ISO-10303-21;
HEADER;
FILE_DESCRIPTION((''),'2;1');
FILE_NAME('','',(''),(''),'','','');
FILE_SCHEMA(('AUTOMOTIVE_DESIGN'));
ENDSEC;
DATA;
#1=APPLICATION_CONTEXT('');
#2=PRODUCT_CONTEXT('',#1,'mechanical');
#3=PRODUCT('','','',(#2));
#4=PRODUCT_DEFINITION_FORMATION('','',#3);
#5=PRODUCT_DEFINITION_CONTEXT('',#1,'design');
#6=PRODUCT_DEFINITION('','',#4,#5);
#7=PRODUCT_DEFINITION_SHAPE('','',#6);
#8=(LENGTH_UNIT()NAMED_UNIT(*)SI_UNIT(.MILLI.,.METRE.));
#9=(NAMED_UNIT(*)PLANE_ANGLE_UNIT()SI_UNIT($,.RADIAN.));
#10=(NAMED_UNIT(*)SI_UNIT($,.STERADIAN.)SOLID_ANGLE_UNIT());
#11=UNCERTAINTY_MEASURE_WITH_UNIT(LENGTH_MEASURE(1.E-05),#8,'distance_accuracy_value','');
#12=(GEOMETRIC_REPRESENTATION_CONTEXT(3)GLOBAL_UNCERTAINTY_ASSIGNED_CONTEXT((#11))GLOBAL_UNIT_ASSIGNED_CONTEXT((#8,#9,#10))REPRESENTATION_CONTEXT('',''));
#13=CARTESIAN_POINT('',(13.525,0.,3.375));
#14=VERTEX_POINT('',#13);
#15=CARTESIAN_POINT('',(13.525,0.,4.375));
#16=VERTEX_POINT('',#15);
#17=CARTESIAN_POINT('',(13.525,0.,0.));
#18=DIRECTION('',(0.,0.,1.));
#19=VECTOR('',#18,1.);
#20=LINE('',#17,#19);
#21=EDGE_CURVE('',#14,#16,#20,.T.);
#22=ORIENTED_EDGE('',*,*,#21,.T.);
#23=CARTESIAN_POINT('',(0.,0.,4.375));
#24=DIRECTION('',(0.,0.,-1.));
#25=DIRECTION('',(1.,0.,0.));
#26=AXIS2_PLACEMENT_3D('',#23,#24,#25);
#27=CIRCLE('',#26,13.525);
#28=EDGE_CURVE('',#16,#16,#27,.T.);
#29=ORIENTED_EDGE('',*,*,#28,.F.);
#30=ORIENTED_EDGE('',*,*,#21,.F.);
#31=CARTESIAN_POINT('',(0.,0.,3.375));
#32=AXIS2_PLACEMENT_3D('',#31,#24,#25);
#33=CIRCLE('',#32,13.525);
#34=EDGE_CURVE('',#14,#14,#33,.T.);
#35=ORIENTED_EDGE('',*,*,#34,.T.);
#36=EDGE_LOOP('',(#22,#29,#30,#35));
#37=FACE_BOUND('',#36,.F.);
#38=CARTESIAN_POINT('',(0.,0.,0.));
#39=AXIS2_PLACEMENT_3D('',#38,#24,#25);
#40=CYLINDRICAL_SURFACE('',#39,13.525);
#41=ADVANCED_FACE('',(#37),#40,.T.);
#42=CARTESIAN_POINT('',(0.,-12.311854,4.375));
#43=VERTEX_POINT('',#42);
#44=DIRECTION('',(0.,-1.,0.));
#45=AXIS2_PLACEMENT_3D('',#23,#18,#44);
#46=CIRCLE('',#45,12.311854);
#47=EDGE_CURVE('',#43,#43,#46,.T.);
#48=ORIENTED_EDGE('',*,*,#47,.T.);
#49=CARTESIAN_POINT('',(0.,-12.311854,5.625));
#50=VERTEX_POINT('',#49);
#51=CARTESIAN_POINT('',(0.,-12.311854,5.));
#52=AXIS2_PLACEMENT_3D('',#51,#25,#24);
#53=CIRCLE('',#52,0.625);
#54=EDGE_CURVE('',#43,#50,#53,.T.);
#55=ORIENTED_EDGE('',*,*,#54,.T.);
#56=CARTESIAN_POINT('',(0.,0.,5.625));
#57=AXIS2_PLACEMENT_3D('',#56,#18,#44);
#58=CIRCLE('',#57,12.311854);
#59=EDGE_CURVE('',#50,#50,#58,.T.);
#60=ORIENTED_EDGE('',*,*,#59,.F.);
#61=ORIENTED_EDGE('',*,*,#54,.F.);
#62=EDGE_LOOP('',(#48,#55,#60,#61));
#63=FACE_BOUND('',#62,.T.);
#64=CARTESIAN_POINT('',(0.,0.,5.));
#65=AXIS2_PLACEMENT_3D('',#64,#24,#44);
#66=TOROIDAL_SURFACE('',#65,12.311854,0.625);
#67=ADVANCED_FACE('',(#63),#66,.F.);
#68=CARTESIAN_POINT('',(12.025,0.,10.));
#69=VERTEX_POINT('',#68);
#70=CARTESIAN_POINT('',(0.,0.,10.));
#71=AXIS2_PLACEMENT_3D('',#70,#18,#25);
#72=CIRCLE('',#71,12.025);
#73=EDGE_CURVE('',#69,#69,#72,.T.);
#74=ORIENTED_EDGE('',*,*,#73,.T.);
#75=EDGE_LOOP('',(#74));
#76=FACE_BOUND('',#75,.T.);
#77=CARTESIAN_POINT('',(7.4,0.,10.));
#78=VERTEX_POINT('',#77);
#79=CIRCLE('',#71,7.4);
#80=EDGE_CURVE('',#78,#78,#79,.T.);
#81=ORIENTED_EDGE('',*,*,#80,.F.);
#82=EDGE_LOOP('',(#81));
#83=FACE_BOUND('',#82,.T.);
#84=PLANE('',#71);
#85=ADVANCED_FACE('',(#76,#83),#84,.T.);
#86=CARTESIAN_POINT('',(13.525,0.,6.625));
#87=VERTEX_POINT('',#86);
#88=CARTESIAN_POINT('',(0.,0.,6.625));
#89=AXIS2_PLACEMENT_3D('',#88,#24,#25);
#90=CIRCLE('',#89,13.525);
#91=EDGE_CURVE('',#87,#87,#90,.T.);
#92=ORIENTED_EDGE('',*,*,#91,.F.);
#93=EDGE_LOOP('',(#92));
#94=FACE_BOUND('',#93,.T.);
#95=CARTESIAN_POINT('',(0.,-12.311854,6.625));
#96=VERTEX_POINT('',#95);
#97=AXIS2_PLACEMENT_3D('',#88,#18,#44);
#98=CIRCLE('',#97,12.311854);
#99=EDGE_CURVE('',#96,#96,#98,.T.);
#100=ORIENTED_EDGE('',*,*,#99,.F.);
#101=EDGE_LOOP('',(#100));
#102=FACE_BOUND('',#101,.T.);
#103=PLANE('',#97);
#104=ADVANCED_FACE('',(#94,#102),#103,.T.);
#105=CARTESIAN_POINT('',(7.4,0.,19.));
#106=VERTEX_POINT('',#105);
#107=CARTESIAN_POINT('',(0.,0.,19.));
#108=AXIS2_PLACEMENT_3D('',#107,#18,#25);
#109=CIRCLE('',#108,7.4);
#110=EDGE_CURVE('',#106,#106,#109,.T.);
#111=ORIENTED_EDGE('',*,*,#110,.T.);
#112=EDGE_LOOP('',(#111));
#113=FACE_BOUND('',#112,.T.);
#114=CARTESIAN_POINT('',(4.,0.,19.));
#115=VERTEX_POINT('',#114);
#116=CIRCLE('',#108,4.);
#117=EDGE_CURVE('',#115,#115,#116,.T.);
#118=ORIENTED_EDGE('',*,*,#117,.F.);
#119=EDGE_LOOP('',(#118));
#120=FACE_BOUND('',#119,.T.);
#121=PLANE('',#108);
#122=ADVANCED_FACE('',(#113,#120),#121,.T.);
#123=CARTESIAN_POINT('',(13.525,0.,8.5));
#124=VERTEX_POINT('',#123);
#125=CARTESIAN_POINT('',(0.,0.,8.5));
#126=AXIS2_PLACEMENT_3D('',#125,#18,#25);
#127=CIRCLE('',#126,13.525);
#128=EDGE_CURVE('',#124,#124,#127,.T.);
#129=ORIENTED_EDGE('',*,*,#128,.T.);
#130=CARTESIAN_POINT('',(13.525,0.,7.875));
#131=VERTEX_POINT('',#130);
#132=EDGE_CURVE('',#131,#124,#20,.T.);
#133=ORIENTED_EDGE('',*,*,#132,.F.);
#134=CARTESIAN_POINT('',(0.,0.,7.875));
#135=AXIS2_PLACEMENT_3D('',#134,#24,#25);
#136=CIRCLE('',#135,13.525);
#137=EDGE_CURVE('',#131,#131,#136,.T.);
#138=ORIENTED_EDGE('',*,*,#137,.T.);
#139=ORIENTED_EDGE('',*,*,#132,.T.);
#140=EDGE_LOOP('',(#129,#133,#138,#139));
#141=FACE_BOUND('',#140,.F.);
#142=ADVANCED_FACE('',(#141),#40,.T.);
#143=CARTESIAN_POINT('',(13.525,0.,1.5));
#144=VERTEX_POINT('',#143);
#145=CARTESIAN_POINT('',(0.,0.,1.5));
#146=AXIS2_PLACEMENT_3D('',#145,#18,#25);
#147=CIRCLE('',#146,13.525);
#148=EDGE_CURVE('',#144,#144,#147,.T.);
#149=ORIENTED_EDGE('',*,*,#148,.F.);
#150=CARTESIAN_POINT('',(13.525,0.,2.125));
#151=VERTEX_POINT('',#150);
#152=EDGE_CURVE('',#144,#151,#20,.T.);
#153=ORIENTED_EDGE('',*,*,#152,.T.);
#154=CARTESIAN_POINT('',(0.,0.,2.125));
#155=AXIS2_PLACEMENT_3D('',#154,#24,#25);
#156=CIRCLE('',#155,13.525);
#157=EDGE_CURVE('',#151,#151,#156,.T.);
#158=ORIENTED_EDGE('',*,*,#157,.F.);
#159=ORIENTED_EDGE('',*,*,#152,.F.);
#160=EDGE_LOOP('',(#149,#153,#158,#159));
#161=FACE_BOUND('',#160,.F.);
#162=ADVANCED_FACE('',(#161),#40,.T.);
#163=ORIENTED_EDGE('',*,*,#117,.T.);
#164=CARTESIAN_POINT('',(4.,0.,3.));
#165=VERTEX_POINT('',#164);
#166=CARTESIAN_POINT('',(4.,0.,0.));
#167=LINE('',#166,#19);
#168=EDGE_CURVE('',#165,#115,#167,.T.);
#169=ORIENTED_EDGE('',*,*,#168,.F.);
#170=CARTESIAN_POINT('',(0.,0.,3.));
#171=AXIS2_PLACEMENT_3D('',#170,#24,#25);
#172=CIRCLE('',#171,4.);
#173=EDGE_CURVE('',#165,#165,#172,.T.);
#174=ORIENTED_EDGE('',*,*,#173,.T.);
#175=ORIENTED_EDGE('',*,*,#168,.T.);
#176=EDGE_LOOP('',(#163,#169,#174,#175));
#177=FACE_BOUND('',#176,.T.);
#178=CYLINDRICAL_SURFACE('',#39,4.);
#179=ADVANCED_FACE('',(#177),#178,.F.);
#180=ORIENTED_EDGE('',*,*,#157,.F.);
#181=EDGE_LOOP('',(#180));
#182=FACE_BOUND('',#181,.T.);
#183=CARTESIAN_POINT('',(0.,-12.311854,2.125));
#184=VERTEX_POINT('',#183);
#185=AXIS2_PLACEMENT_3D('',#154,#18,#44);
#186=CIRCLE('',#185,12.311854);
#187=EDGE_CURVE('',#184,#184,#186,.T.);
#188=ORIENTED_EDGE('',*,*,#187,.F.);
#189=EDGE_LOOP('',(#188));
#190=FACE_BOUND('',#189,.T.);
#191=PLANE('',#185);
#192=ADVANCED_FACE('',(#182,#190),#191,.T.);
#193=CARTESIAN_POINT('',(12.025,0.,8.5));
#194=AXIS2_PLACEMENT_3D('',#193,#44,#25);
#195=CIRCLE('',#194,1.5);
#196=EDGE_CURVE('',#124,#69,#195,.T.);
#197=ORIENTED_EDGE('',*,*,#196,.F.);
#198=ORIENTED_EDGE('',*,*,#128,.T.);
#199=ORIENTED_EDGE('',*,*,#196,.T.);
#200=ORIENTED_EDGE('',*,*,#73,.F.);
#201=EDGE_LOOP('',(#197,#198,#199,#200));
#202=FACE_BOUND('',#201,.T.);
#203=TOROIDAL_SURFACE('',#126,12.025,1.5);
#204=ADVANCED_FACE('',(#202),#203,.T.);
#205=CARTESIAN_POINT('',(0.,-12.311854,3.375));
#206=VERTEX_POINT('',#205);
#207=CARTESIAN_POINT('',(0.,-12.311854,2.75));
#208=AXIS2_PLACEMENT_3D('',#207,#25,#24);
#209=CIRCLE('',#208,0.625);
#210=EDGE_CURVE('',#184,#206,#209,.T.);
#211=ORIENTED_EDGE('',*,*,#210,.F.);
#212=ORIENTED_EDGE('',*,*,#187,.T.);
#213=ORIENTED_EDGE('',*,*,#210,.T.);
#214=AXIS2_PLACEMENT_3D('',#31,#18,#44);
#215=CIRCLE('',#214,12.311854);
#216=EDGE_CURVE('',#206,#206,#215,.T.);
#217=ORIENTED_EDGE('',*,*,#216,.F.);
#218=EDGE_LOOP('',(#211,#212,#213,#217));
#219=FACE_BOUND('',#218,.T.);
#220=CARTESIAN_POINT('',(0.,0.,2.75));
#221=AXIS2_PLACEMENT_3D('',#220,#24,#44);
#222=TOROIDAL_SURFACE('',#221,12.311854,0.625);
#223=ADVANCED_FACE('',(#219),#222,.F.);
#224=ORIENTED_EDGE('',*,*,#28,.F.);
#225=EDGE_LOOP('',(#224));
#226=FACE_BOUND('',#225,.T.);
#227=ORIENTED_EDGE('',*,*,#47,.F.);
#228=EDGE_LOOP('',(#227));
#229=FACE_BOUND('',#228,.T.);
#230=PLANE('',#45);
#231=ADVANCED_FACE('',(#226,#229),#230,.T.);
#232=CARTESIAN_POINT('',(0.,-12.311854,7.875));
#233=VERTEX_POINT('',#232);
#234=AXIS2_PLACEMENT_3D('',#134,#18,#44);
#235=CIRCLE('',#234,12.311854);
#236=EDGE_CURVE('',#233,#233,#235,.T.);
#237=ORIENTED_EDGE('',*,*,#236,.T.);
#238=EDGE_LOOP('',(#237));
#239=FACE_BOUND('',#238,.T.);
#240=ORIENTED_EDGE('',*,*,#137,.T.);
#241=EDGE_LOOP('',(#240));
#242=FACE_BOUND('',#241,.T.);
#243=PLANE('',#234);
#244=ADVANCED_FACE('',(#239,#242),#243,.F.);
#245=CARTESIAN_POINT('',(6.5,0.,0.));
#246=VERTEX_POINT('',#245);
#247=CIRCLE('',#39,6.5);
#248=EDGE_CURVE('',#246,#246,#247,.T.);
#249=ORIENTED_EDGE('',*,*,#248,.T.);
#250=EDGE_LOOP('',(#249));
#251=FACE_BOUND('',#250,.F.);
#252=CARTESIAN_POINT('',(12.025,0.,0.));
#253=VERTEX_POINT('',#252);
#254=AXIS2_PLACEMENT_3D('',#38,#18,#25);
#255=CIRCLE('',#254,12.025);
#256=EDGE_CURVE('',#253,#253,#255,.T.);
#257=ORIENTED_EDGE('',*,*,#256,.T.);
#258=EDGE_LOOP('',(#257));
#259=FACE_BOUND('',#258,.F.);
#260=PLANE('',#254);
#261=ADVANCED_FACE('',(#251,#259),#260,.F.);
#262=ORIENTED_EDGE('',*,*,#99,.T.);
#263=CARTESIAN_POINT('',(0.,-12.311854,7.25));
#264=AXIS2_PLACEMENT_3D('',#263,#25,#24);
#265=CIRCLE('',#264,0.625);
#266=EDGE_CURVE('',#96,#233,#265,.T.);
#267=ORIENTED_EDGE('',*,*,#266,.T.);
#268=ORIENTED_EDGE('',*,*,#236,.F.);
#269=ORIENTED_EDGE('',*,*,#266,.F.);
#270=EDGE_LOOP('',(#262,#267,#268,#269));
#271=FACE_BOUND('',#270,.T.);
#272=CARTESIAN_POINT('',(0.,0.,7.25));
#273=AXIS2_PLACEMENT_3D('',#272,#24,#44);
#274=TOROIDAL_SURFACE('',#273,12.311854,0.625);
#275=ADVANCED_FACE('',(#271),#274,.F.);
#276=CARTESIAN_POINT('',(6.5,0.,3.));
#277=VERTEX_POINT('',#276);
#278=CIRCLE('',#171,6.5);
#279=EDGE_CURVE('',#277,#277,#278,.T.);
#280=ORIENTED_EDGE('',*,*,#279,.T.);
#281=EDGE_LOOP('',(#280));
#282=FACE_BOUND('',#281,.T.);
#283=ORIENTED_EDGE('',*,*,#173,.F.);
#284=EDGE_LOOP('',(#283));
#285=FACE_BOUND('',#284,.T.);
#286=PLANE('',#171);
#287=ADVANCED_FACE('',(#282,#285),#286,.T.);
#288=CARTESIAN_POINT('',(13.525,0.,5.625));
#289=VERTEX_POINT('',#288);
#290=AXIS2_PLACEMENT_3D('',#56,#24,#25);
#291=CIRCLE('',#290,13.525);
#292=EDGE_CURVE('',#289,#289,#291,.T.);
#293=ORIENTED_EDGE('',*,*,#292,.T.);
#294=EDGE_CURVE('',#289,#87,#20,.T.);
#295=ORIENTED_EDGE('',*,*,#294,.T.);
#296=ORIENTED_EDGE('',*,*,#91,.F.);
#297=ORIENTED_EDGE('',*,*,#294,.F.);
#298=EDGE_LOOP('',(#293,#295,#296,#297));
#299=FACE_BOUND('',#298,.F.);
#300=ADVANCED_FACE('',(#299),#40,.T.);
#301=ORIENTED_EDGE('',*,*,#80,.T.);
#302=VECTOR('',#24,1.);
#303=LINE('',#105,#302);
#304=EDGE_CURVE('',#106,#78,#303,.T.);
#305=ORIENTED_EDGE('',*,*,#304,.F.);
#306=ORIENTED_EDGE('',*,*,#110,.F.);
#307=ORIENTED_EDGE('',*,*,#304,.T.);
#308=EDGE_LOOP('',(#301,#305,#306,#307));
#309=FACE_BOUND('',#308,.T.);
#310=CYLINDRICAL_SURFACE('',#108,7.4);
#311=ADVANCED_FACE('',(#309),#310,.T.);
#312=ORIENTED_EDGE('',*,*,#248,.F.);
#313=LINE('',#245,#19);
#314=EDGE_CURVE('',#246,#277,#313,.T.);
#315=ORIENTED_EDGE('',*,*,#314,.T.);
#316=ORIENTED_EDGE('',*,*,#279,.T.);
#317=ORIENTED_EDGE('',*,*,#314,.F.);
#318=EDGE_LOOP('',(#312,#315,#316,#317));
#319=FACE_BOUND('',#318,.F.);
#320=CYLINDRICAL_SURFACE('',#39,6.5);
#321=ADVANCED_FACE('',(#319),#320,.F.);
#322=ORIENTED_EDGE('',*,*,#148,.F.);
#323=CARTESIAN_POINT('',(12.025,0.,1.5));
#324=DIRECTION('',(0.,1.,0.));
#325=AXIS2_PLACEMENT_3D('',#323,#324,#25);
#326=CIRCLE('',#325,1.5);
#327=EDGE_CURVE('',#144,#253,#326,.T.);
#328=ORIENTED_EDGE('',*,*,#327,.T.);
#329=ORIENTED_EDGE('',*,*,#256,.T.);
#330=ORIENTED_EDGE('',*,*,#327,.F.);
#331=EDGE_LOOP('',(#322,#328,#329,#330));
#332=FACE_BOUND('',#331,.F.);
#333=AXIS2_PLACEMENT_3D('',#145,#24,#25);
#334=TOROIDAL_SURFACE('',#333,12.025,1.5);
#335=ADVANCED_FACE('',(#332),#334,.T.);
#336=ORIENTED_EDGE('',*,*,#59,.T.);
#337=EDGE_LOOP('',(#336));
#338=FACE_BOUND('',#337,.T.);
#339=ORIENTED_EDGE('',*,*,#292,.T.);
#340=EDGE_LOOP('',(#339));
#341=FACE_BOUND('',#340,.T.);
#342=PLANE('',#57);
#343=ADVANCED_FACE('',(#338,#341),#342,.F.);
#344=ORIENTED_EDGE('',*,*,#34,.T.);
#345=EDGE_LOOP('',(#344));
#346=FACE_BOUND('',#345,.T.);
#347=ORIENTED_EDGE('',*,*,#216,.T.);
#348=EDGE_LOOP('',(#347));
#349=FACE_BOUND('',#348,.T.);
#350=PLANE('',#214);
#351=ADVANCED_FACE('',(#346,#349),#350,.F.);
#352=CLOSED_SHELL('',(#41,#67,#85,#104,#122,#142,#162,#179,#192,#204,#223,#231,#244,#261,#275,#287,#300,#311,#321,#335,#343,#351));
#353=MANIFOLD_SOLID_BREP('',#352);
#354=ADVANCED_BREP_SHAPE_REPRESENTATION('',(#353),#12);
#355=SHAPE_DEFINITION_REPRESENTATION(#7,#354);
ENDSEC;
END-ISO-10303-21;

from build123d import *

# Parameters (mm, degrees)
F0_R     = 13.525
F0_R_2   = 4
F1_DEPTH = 19
F2_R     = 6.5
F3_DEPTH = 3
F4_R     = 13.525
F4_R_2   = 7.4
F5_DEPTH = 9
F6_R     = 1.5


# Not quite as in the source:
# - a feature names something its author has since deleted; it is built from what else it names


with BuildPart() as f1:
    # F0 (on Top) → F1 (new body)
    with BuildSketch(Plane.XY):
        Circle(F0_R)
        Circle(F0_R_2, mode=Mode.SUBTRACT)
    extrude(amount=F1_DEPTH)

    # F2 (on face) → F3 (cut)
    with BuildSketch(Plane(origin=(0, 0, 0), x_dir=(1, 0, 0), z_dir=(0, 0, -1))):
        Circle(F2_R)
    extrude(amount=-F3_DEPTH, mode=Mode.SUBTRACT)

    # F4 (on face) → F5 (cut)
    with BuildSketch(Plane.XY.offset(19)):
        Circle(F4_R)
        Circle(F4_R_2, mode=Mode.SUBTRACT)
    extrude(amount=-F5_DEPTH, mode=Mode.SUBTRACT)

    # F6
    f6_edges = [f1.edges().sort_by_distance(p)[0] for p in [
        (-13.525, 0, 10),
        (-13.525, 0, 0),
    ]]
    fillet(f6_edges, radius=F6_R)

    # F7 (on Right) → F8 (revolve, cut)
    with BuildSketch(Plane.YZ):
        with BuildLine():
            ThreePointArc((-12.3118543997, 2.125), (-11.6868543997, 2.75), (-12.3118543997, 3.375))
            Line((-12.3118543997, 3.375), (-14.8118543997, 3.375))
            Line((-14.8118543997, 3.375), (-14.8118543997, 2.75))
            Line((-14.8118543997, 2.75), (-14.8118543997, 2.125))
            Line((-14.8118543997, 2.125), (-12.3118543997, 2.125))
        make_face()
        with BuildLine():
            Line((-17.3118543997, 6.625), (-14.8118543997, 6.625))
            Line((-14.8118543997, 6.625), (-12.3118543997, 6.625))
            ThreePointArc((-12.3118543997, 6.625), (-11.6868543997, 7.25), (-12.3118543997, 7.875))
            Line((-12.3118543997, 7.875), (-17.3118543997, 7.875))
            Line((-17.3118543997, 7.875), (-17.3118543997, 6.625))
        make_face()
        Polygon((-17.3118543997, 4.375), (-14.8118543997, 4.375), (-14.8118543997, 5), (-14.8118543997, 5.625), (-17.3118543997, 5.625), align=None)
        with BuildLine():
            Line((-14.8118543997, 5), (-14.8118543997, 4.375))
            Line((-14.8118543997, 4.375), (-12.3118543997, 4.375))
            ThreePointArc((-12.3118543997, 4.375), (-11.6868543997, 5), (-12.3118543997, 5.625))
            Line((-12.3118543997, 5.625), (-14.8118543997, 5.625))
            Line((-14.8118543997, 5.625), (-14.8118543997, 5))
        make_face()
        Polygon((-14.8118543997, 2.75), (-14.8118543997, 3.375), (-17.3118543997, 3.375), (-17.3118543997, 2.125), (-14.8118543997, 2.125), align=None)
    revolve(axis=Axis((0, 0, 10.2130547166), (0, 0, 1)), mode=Mode.SUBTRACT)


solid = f1.part
